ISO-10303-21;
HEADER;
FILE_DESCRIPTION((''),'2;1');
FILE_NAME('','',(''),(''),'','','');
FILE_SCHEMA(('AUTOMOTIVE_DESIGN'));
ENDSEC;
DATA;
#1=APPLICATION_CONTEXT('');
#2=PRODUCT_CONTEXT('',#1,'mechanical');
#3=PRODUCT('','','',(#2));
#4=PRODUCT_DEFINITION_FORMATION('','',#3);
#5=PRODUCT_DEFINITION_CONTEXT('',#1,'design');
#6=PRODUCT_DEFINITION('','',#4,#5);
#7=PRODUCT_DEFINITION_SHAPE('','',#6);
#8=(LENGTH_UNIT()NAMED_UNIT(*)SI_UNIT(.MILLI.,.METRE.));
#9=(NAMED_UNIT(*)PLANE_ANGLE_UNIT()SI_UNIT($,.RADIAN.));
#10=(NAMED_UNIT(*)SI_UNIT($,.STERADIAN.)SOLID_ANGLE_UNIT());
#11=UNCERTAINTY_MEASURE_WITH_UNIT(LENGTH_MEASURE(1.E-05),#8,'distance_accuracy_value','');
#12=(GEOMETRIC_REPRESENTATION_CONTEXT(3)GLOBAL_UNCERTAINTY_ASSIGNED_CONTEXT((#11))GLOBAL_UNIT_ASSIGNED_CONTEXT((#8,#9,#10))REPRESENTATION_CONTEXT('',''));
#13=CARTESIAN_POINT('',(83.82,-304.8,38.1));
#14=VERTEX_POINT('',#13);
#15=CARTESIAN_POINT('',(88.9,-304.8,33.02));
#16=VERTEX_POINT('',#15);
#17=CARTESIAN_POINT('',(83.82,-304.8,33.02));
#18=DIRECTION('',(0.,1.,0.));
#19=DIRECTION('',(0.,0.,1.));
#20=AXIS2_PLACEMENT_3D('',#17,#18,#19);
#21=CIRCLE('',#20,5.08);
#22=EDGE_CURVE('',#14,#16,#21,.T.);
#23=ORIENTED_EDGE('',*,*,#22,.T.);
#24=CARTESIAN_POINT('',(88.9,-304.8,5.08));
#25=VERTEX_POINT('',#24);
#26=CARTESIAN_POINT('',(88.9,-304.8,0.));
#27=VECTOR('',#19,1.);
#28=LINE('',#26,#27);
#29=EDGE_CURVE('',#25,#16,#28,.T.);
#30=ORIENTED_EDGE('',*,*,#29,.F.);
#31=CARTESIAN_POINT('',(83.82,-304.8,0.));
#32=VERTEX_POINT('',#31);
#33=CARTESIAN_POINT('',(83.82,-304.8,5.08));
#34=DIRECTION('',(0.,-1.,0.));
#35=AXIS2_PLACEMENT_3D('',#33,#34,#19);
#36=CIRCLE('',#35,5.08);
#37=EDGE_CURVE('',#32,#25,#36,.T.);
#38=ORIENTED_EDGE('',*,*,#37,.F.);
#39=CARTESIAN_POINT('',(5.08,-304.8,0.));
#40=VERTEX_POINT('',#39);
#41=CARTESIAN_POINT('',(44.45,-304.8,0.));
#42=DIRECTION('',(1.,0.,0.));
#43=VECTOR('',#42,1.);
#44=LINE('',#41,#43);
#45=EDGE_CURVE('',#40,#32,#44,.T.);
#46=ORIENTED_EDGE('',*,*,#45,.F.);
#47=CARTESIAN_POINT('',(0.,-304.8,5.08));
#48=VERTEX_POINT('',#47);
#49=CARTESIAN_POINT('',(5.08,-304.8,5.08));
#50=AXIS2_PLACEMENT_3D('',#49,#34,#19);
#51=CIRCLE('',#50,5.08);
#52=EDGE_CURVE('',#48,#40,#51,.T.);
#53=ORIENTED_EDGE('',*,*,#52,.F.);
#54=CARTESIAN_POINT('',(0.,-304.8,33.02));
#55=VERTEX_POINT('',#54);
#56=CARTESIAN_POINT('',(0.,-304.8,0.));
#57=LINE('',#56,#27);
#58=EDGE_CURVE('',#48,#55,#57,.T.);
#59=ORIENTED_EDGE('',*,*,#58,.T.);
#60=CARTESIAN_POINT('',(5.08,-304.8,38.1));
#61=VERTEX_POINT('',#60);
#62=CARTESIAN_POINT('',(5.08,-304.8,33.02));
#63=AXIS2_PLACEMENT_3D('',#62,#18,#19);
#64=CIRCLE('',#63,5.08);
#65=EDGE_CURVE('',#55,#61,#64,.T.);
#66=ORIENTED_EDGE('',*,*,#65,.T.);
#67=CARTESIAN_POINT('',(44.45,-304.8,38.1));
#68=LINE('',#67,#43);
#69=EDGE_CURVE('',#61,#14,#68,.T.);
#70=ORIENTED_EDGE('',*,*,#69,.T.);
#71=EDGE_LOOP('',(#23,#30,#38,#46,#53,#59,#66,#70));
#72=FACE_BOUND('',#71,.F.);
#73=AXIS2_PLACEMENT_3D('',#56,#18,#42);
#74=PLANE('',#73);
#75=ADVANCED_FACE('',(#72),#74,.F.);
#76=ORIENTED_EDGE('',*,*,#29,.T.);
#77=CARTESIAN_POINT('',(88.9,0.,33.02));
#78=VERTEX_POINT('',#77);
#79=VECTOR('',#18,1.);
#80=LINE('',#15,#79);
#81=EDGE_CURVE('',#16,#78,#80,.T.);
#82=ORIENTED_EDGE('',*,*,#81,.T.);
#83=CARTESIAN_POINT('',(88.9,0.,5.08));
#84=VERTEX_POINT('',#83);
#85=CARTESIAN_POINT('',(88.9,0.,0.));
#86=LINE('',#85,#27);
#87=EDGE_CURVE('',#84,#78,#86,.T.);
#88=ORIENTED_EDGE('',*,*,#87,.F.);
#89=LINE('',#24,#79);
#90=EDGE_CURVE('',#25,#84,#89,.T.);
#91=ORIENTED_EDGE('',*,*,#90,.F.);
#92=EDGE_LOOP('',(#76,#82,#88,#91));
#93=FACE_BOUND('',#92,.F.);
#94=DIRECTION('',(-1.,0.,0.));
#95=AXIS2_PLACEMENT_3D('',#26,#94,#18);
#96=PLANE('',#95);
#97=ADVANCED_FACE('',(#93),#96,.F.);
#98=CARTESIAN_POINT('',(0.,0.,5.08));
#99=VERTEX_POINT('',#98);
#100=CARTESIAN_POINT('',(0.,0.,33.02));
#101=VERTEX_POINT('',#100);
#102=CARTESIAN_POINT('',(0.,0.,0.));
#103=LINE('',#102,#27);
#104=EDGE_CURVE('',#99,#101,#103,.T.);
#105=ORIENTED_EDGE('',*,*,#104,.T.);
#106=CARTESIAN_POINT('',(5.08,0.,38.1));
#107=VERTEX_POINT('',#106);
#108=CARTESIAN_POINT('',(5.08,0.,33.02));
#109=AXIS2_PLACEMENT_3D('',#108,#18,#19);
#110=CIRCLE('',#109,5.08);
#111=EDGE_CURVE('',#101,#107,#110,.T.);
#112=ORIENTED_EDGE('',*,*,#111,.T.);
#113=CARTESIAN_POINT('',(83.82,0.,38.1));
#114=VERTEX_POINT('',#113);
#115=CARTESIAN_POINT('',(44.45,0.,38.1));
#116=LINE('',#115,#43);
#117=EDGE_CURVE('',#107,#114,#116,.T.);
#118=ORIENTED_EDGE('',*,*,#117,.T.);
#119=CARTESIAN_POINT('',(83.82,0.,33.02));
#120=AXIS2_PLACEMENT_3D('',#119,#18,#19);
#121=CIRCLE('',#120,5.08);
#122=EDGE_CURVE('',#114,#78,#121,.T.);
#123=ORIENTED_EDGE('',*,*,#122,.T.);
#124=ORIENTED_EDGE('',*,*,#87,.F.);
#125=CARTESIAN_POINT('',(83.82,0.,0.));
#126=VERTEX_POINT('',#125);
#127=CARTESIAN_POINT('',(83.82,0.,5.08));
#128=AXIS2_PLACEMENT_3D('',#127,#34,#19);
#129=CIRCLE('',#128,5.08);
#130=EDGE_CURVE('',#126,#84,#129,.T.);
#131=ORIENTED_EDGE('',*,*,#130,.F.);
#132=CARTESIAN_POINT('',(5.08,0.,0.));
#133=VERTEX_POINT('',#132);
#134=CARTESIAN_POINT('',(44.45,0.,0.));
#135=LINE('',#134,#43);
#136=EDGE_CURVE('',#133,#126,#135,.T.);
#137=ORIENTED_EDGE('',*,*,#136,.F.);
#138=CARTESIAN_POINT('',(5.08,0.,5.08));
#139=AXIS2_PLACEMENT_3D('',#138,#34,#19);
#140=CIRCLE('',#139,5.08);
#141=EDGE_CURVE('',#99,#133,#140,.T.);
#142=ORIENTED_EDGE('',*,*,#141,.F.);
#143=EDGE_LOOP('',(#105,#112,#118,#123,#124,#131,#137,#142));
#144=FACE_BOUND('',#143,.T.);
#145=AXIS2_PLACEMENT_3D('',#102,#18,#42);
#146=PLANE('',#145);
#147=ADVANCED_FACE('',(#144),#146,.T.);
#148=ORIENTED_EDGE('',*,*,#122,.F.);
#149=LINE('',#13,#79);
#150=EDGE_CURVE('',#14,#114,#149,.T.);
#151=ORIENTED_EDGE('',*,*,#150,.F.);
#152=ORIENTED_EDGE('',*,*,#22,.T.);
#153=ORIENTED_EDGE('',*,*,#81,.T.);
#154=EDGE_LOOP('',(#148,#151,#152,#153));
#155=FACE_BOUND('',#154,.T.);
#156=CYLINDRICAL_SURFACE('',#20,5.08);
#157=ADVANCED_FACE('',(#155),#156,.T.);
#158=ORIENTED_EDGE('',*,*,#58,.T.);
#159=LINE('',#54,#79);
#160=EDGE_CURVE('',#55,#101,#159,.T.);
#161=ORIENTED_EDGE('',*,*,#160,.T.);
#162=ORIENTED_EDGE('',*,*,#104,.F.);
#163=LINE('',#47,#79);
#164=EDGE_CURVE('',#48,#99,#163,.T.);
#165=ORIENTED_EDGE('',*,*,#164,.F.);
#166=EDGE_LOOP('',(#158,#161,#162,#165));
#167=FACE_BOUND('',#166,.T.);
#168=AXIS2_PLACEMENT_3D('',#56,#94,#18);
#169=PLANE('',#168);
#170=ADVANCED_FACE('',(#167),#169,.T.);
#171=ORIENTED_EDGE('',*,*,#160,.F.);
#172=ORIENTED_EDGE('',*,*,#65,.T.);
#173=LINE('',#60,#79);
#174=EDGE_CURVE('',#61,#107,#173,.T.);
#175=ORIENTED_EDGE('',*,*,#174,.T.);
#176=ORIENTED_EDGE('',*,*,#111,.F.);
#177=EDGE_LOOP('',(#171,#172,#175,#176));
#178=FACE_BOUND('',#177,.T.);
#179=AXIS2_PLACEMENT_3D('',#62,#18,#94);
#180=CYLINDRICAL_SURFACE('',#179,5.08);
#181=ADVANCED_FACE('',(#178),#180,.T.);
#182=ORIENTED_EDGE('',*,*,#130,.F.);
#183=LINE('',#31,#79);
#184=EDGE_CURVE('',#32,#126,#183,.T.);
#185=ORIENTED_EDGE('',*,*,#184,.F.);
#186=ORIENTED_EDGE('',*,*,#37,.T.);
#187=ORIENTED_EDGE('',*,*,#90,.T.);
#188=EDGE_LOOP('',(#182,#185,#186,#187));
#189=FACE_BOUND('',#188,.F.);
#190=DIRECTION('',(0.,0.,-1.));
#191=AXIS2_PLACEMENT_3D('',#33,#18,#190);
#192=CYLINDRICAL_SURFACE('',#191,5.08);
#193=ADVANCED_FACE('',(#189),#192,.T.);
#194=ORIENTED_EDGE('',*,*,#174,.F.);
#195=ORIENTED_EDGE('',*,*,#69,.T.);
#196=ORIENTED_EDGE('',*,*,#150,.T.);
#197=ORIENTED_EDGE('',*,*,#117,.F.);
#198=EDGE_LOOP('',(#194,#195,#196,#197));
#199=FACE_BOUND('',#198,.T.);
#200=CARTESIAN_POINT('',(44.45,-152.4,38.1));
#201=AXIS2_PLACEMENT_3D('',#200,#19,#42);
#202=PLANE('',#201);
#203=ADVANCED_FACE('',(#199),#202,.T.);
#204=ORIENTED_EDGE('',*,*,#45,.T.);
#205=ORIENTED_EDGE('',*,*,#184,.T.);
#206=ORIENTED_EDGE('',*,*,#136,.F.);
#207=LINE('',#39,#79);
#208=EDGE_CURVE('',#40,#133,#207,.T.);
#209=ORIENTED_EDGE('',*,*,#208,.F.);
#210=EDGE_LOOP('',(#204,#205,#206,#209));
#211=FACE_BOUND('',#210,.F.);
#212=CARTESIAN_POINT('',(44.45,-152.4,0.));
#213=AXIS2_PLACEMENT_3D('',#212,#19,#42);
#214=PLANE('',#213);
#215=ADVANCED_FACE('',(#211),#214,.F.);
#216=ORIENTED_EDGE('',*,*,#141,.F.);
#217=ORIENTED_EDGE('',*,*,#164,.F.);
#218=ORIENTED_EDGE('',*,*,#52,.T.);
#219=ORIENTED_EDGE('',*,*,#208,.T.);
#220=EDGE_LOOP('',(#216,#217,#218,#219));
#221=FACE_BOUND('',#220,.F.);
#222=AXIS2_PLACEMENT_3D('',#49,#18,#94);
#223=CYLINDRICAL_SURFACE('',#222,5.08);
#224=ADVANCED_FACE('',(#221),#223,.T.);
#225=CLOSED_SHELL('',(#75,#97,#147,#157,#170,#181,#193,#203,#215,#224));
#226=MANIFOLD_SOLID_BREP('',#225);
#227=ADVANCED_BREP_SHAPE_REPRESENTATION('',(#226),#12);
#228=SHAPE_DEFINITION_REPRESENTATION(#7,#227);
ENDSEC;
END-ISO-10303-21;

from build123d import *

# Parameters (mm, degrees)
F0_W     = 88.9
F0_H     = 304.8
F1_DEPTH = 38.1
F2_R     = 5.08
F3_R     = 5.08


# Not quite as in the source:
# - a feature names something its author has since deleted; it is built from what else it names


with BuildPart() as f1:
    # F0 (on Top) → F1 (new body)
    with BuildSketch(Plane.XY):
        with Locations((44.45, -152.4)):
            Rectangle(F0_W, F0_H)
    extrude(amount=F1_DEPTH)

    # F2
    f2_edges = [f1.edges().sort_by_distance(p)[0] for p in [
        (0, -152.4, 38.1),
        (0, -152.4, 0),
    ]]
    fillet(f2_edges, radius=F2_R)

    # F3
    f3_edges = [f1.edges().sort_by_distance(p)[0] for p in [
        (88.9, -152.4, 38.1),
        (88.9, -152.4, 0),
    ]]
    fillet(f3_edges, radius=F3_R)


solid = f1.part
